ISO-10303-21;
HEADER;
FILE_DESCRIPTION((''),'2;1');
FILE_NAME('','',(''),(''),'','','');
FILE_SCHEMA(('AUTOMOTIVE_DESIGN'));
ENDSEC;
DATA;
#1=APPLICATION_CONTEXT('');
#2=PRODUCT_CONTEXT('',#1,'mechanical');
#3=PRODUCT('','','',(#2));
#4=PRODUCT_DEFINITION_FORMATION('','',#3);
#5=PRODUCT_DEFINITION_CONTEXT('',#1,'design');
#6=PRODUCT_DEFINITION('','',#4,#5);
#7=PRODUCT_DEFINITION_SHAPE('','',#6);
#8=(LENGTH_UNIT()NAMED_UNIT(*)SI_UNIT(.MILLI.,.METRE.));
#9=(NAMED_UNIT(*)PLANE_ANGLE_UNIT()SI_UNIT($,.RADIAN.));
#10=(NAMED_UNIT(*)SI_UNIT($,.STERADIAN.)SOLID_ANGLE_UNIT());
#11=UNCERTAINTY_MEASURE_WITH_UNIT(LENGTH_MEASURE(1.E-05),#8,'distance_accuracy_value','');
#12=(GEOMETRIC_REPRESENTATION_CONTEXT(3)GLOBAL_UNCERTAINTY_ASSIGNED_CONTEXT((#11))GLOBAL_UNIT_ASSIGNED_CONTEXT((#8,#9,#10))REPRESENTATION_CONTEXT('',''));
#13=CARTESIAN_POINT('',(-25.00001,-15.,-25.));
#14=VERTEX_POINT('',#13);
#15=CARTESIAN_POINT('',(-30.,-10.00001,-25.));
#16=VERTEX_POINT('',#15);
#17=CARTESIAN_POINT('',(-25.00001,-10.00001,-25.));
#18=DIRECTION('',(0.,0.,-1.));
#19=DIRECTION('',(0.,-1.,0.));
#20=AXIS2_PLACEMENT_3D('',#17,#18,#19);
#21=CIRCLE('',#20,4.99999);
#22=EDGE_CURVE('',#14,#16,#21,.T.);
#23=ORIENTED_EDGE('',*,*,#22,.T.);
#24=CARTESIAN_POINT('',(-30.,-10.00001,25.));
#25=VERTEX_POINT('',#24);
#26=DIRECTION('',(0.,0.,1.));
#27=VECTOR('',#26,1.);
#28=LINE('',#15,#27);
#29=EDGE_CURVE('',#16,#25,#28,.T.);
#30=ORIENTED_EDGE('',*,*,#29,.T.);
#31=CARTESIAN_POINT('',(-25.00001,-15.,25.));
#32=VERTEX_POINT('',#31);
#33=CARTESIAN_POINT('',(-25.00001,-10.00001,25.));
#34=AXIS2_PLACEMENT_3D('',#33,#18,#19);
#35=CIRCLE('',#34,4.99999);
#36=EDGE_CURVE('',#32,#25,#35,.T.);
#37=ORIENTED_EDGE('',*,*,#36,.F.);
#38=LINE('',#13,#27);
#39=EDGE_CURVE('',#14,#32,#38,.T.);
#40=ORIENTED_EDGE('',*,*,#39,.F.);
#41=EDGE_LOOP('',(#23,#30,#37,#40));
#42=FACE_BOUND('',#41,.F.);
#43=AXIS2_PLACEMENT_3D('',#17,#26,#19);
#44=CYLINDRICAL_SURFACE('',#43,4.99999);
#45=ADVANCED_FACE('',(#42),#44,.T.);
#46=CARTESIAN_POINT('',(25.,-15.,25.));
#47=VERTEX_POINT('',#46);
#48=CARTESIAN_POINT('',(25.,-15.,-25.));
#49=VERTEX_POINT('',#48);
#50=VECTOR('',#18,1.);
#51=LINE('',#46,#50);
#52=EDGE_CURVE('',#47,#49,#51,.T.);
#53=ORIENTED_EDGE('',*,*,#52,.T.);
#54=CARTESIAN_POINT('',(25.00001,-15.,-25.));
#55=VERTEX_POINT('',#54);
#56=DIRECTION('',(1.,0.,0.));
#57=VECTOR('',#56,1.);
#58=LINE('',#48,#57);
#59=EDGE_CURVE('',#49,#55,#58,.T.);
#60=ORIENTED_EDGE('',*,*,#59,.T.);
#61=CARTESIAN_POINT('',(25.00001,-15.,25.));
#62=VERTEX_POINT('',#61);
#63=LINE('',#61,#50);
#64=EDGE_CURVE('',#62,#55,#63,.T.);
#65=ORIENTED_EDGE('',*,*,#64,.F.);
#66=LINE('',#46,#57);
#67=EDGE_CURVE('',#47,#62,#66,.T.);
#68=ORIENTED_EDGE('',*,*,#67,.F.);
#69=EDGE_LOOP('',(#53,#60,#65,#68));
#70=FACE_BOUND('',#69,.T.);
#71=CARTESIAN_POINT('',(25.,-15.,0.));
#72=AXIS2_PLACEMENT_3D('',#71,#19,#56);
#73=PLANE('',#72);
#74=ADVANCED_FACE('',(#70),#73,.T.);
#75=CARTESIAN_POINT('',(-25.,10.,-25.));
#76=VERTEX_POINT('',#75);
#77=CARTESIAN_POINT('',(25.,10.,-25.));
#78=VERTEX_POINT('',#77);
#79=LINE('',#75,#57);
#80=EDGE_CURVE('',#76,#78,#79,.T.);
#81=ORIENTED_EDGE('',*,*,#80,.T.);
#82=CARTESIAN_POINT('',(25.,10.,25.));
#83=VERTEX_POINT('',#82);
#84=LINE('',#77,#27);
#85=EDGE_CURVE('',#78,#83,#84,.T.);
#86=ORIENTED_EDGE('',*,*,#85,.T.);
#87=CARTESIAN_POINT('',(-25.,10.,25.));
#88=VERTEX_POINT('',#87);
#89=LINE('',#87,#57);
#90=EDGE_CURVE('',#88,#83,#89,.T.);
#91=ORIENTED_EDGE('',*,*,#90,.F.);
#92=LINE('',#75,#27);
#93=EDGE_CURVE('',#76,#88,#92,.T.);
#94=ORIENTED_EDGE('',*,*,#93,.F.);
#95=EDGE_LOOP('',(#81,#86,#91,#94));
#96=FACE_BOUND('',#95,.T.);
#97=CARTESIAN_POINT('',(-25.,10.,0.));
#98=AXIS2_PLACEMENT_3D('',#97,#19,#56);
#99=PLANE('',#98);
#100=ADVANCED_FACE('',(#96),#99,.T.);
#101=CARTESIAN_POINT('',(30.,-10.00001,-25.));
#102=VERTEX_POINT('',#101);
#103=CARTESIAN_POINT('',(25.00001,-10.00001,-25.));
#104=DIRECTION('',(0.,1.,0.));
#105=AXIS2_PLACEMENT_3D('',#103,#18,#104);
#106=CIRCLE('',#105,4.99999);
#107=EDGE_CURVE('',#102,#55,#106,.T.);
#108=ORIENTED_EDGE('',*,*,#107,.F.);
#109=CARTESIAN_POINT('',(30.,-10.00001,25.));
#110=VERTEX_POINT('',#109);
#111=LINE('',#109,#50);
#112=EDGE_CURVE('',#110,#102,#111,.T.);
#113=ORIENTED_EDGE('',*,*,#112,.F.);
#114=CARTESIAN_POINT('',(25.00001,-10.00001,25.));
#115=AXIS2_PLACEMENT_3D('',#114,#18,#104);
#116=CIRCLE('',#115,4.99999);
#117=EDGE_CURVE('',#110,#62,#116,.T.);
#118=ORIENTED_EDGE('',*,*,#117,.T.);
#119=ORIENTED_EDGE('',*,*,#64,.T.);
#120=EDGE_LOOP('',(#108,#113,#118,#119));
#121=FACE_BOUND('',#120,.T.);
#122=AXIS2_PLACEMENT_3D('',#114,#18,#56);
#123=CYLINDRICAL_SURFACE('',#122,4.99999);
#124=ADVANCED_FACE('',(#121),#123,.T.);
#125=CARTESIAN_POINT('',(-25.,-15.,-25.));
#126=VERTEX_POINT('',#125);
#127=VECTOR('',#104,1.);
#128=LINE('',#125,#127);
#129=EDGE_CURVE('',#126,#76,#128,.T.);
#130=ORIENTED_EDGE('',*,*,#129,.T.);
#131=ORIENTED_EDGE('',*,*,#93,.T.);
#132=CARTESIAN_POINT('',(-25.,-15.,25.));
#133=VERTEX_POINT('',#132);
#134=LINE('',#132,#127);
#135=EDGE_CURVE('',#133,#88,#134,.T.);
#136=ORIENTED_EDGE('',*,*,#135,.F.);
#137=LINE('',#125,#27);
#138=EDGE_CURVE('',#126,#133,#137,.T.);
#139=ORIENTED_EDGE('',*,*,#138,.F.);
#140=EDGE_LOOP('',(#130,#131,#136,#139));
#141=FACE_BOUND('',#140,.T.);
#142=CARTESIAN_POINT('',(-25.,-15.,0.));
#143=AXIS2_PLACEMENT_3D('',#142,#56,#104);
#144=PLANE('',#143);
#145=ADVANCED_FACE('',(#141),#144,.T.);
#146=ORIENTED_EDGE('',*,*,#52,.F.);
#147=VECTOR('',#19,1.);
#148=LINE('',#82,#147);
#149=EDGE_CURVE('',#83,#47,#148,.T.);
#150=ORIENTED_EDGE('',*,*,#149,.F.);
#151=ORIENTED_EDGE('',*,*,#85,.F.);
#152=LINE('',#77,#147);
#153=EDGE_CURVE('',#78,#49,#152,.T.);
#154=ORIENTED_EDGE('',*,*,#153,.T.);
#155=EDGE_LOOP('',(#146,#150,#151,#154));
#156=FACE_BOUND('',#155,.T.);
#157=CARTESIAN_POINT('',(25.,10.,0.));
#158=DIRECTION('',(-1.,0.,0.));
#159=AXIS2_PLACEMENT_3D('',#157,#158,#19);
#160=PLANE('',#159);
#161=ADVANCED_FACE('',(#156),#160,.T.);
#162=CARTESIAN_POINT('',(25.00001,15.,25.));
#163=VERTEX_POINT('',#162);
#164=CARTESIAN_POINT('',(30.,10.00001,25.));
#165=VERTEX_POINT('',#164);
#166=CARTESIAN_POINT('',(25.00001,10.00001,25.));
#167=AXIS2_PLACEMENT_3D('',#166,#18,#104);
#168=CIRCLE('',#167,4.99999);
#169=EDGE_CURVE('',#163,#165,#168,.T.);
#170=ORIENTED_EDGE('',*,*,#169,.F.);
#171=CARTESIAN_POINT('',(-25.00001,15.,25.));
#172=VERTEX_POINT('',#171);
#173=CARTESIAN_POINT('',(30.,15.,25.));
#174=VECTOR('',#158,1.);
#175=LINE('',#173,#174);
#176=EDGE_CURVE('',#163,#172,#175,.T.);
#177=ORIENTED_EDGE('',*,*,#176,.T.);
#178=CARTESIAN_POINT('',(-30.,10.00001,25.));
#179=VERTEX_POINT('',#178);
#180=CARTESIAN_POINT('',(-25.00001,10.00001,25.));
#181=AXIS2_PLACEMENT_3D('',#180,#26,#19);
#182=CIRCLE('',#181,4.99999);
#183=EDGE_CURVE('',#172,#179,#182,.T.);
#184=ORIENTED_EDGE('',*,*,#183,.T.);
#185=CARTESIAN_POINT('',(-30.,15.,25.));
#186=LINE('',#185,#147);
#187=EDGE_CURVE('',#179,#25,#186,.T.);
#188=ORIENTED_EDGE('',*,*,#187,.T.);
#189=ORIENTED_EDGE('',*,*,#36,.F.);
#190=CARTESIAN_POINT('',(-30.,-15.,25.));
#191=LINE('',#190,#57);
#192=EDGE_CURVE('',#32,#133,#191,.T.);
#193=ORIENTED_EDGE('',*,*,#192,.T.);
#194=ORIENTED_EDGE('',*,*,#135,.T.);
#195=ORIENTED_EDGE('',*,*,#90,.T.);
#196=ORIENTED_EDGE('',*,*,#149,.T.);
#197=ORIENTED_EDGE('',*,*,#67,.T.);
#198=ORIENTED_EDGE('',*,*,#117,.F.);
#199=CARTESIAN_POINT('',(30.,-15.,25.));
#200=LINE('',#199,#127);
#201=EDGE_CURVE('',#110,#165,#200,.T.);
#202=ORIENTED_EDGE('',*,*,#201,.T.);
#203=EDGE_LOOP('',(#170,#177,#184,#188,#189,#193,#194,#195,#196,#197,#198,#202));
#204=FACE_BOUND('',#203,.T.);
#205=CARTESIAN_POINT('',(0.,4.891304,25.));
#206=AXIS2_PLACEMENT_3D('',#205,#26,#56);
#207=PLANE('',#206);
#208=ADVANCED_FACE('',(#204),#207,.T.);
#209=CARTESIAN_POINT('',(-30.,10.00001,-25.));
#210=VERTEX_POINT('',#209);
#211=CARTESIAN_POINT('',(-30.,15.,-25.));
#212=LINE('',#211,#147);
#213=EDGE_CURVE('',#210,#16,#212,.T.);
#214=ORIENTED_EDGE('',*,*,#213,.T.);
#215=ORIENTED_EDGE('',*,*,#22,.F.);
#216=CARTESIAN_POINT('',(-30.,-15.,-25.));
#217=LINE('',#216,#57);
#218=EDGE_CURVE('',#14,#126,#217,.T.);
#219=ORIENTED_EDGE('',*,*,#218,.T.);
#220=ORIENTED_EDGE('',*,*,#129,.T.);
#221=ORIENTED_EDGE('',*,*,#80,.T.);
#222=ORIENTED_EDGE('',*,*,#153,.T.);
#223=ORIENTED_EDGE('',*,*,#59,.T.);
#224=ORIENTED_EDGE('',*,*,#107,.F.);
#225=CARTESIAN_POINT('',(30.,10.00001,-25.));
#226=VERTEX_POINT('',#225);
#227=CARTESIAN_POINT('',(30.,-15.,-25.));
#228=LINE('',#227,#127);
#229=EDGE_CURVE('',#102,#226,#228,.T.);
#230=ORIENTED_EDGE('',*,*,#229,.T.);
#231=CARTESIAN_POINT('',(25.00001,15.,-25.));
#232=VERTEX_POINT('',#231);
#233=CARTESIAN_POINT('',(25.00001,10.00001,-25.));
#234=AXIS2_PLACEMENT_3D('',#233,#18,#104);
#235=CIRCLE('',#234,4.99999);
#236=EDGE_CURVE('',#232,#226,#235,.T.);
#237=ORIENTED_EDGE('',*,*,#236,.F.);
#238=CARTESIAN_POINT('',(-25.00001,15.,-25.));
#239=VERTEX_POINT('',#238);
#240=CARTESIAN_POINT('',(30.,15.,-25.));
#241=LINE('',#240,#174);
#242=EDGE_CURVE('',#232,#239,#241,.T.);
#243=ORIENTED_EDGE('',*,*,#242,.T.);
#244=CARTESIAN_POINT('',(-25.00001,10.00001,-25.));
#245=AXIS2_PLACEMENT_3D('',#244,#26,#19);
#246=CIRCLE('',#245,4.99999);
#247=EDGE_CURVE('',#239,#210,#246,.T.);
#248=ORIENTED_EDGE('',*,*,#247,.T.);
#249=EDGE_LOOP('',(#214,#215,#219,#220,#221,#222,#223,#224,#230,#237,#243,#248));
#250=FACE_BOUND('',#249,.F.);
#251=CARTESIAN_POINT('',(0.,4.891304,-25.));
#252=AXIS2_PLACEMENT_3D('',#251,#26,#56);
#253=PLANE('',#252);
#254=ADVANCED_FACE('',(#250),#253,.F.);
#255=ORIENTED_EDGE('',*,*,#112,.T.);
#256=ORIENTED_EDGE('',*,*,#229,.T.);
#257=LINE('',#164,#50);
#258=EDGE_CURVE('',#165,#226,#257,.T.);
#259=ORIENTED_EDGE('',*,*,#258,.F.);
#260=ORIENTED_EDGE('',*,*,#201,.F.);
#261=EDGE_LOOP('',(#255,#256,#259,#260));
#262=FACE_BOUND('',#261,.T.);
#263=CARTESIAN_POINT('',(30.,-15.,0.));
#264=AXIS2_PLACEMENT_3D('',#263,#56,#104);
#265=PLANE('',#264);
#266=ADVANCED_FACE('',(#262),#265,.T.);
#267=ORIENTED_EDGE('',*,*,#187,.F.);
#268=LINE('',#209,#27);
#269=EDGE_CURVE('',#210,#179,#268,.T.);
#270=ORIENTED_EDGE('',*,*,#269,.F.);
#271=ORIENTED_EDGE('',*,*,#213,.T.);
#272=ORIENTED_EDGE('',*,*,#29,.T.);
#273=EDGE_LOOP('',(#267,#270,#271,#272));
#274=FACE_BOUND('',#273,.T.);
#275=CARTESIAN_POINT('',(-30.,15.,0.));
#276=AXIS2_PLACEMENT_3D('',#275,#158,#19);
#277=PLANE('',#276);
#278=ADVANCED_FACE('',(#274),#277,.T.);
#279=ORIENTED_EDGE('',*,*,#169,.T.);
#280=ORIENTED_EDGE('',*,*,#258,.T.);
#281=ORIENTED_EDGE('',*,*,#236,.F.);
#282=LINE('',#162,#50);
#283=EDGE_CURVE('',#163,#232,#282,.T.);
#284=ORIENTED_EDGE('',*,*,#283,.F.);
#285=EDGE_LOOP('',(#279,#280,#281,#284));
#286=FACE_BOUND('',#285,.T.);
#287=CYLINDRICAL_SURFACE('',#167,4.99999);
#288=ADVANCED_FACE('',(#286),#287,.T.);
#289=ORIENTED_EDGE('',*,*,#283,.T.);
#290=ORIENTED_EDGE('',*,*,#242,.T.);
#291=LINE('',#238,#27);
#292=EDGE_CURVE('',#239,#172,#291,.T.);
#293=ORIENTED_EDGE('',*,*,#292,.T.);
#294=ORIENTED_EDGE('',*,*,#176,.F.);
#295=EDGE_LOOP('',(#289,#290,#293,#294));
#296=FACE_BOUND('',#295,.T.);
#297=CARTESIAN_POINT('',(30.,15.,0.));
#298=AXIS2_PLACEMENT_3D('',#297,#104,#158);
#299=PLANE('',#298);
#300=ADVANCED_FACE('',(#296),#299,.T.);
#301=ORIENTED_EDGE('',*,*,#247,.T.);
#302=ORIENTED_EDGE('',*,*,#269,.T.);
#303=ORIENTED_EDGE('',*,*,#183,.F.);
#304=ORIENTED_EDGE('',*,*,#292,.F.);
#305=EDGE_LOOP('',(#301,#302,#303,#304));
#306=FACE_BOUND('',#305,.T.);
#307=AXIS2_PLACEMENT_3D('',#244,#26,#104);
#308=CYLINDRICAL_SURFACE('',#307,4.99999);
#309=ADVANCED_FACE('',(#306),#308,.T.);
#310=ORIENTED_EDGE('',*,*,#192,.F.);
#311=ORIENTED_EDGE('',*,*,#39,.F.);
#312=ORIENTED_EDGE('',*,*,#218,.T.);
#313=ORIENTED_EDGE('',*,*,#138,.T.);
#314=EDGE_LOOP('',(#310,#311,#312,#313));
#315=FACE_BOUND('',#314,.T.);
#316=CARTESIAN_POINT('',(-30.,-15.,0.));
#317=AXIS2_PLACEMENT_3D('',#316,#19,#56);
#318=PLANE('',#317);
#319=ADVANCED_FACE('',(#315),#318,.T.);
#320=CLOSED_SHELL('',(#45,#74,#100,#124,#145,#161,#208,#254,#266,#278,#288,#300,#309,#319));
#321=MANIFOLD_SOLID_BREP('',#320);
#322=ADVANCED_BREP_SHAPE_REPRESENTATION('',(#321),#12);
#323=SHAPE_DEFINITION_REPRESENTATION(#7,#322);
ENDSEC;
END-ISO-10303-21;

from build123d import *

# Parameters (mm, degrees)
F1_DEPTH      = 25
F1_DEPTH_BACK = 25
F2_R          = 4.99999


# Not quite as in the source:
# - a fillet or chamfer is up to 0.001 mm smaller than in the source, because OpenCascade refuses the exact size


with BuildPart() as f1:
    # F0 (on Top) → F1 (new body, two sides)
    with BuildSketch(Plane.XY) as f1_sk:
        Polygon((30, 15), (-30, 15), (-30, -15), (-25, -15), (-25, 10), (25, 10), (25, -15), (30, -15), align=None)
    extrude(amount=F1_DEPTH)
    extrude(f1_sk.sketch, amount=-F1_DEPTH_BACK)

    # F2 (radius 5 in the source; OpenCascade refuses exactly that, so slightly less here)
    f2_edges = [f1.edges().sort_by_distance(p)[0] for p in [
        (-30, 15, 0),
        (30, 15, 0),
        (30, -15, 0),
        (-30, -15, 0),
    ]]
    fillet(f2_edges, radius=F2_R)


solid = f1.part
